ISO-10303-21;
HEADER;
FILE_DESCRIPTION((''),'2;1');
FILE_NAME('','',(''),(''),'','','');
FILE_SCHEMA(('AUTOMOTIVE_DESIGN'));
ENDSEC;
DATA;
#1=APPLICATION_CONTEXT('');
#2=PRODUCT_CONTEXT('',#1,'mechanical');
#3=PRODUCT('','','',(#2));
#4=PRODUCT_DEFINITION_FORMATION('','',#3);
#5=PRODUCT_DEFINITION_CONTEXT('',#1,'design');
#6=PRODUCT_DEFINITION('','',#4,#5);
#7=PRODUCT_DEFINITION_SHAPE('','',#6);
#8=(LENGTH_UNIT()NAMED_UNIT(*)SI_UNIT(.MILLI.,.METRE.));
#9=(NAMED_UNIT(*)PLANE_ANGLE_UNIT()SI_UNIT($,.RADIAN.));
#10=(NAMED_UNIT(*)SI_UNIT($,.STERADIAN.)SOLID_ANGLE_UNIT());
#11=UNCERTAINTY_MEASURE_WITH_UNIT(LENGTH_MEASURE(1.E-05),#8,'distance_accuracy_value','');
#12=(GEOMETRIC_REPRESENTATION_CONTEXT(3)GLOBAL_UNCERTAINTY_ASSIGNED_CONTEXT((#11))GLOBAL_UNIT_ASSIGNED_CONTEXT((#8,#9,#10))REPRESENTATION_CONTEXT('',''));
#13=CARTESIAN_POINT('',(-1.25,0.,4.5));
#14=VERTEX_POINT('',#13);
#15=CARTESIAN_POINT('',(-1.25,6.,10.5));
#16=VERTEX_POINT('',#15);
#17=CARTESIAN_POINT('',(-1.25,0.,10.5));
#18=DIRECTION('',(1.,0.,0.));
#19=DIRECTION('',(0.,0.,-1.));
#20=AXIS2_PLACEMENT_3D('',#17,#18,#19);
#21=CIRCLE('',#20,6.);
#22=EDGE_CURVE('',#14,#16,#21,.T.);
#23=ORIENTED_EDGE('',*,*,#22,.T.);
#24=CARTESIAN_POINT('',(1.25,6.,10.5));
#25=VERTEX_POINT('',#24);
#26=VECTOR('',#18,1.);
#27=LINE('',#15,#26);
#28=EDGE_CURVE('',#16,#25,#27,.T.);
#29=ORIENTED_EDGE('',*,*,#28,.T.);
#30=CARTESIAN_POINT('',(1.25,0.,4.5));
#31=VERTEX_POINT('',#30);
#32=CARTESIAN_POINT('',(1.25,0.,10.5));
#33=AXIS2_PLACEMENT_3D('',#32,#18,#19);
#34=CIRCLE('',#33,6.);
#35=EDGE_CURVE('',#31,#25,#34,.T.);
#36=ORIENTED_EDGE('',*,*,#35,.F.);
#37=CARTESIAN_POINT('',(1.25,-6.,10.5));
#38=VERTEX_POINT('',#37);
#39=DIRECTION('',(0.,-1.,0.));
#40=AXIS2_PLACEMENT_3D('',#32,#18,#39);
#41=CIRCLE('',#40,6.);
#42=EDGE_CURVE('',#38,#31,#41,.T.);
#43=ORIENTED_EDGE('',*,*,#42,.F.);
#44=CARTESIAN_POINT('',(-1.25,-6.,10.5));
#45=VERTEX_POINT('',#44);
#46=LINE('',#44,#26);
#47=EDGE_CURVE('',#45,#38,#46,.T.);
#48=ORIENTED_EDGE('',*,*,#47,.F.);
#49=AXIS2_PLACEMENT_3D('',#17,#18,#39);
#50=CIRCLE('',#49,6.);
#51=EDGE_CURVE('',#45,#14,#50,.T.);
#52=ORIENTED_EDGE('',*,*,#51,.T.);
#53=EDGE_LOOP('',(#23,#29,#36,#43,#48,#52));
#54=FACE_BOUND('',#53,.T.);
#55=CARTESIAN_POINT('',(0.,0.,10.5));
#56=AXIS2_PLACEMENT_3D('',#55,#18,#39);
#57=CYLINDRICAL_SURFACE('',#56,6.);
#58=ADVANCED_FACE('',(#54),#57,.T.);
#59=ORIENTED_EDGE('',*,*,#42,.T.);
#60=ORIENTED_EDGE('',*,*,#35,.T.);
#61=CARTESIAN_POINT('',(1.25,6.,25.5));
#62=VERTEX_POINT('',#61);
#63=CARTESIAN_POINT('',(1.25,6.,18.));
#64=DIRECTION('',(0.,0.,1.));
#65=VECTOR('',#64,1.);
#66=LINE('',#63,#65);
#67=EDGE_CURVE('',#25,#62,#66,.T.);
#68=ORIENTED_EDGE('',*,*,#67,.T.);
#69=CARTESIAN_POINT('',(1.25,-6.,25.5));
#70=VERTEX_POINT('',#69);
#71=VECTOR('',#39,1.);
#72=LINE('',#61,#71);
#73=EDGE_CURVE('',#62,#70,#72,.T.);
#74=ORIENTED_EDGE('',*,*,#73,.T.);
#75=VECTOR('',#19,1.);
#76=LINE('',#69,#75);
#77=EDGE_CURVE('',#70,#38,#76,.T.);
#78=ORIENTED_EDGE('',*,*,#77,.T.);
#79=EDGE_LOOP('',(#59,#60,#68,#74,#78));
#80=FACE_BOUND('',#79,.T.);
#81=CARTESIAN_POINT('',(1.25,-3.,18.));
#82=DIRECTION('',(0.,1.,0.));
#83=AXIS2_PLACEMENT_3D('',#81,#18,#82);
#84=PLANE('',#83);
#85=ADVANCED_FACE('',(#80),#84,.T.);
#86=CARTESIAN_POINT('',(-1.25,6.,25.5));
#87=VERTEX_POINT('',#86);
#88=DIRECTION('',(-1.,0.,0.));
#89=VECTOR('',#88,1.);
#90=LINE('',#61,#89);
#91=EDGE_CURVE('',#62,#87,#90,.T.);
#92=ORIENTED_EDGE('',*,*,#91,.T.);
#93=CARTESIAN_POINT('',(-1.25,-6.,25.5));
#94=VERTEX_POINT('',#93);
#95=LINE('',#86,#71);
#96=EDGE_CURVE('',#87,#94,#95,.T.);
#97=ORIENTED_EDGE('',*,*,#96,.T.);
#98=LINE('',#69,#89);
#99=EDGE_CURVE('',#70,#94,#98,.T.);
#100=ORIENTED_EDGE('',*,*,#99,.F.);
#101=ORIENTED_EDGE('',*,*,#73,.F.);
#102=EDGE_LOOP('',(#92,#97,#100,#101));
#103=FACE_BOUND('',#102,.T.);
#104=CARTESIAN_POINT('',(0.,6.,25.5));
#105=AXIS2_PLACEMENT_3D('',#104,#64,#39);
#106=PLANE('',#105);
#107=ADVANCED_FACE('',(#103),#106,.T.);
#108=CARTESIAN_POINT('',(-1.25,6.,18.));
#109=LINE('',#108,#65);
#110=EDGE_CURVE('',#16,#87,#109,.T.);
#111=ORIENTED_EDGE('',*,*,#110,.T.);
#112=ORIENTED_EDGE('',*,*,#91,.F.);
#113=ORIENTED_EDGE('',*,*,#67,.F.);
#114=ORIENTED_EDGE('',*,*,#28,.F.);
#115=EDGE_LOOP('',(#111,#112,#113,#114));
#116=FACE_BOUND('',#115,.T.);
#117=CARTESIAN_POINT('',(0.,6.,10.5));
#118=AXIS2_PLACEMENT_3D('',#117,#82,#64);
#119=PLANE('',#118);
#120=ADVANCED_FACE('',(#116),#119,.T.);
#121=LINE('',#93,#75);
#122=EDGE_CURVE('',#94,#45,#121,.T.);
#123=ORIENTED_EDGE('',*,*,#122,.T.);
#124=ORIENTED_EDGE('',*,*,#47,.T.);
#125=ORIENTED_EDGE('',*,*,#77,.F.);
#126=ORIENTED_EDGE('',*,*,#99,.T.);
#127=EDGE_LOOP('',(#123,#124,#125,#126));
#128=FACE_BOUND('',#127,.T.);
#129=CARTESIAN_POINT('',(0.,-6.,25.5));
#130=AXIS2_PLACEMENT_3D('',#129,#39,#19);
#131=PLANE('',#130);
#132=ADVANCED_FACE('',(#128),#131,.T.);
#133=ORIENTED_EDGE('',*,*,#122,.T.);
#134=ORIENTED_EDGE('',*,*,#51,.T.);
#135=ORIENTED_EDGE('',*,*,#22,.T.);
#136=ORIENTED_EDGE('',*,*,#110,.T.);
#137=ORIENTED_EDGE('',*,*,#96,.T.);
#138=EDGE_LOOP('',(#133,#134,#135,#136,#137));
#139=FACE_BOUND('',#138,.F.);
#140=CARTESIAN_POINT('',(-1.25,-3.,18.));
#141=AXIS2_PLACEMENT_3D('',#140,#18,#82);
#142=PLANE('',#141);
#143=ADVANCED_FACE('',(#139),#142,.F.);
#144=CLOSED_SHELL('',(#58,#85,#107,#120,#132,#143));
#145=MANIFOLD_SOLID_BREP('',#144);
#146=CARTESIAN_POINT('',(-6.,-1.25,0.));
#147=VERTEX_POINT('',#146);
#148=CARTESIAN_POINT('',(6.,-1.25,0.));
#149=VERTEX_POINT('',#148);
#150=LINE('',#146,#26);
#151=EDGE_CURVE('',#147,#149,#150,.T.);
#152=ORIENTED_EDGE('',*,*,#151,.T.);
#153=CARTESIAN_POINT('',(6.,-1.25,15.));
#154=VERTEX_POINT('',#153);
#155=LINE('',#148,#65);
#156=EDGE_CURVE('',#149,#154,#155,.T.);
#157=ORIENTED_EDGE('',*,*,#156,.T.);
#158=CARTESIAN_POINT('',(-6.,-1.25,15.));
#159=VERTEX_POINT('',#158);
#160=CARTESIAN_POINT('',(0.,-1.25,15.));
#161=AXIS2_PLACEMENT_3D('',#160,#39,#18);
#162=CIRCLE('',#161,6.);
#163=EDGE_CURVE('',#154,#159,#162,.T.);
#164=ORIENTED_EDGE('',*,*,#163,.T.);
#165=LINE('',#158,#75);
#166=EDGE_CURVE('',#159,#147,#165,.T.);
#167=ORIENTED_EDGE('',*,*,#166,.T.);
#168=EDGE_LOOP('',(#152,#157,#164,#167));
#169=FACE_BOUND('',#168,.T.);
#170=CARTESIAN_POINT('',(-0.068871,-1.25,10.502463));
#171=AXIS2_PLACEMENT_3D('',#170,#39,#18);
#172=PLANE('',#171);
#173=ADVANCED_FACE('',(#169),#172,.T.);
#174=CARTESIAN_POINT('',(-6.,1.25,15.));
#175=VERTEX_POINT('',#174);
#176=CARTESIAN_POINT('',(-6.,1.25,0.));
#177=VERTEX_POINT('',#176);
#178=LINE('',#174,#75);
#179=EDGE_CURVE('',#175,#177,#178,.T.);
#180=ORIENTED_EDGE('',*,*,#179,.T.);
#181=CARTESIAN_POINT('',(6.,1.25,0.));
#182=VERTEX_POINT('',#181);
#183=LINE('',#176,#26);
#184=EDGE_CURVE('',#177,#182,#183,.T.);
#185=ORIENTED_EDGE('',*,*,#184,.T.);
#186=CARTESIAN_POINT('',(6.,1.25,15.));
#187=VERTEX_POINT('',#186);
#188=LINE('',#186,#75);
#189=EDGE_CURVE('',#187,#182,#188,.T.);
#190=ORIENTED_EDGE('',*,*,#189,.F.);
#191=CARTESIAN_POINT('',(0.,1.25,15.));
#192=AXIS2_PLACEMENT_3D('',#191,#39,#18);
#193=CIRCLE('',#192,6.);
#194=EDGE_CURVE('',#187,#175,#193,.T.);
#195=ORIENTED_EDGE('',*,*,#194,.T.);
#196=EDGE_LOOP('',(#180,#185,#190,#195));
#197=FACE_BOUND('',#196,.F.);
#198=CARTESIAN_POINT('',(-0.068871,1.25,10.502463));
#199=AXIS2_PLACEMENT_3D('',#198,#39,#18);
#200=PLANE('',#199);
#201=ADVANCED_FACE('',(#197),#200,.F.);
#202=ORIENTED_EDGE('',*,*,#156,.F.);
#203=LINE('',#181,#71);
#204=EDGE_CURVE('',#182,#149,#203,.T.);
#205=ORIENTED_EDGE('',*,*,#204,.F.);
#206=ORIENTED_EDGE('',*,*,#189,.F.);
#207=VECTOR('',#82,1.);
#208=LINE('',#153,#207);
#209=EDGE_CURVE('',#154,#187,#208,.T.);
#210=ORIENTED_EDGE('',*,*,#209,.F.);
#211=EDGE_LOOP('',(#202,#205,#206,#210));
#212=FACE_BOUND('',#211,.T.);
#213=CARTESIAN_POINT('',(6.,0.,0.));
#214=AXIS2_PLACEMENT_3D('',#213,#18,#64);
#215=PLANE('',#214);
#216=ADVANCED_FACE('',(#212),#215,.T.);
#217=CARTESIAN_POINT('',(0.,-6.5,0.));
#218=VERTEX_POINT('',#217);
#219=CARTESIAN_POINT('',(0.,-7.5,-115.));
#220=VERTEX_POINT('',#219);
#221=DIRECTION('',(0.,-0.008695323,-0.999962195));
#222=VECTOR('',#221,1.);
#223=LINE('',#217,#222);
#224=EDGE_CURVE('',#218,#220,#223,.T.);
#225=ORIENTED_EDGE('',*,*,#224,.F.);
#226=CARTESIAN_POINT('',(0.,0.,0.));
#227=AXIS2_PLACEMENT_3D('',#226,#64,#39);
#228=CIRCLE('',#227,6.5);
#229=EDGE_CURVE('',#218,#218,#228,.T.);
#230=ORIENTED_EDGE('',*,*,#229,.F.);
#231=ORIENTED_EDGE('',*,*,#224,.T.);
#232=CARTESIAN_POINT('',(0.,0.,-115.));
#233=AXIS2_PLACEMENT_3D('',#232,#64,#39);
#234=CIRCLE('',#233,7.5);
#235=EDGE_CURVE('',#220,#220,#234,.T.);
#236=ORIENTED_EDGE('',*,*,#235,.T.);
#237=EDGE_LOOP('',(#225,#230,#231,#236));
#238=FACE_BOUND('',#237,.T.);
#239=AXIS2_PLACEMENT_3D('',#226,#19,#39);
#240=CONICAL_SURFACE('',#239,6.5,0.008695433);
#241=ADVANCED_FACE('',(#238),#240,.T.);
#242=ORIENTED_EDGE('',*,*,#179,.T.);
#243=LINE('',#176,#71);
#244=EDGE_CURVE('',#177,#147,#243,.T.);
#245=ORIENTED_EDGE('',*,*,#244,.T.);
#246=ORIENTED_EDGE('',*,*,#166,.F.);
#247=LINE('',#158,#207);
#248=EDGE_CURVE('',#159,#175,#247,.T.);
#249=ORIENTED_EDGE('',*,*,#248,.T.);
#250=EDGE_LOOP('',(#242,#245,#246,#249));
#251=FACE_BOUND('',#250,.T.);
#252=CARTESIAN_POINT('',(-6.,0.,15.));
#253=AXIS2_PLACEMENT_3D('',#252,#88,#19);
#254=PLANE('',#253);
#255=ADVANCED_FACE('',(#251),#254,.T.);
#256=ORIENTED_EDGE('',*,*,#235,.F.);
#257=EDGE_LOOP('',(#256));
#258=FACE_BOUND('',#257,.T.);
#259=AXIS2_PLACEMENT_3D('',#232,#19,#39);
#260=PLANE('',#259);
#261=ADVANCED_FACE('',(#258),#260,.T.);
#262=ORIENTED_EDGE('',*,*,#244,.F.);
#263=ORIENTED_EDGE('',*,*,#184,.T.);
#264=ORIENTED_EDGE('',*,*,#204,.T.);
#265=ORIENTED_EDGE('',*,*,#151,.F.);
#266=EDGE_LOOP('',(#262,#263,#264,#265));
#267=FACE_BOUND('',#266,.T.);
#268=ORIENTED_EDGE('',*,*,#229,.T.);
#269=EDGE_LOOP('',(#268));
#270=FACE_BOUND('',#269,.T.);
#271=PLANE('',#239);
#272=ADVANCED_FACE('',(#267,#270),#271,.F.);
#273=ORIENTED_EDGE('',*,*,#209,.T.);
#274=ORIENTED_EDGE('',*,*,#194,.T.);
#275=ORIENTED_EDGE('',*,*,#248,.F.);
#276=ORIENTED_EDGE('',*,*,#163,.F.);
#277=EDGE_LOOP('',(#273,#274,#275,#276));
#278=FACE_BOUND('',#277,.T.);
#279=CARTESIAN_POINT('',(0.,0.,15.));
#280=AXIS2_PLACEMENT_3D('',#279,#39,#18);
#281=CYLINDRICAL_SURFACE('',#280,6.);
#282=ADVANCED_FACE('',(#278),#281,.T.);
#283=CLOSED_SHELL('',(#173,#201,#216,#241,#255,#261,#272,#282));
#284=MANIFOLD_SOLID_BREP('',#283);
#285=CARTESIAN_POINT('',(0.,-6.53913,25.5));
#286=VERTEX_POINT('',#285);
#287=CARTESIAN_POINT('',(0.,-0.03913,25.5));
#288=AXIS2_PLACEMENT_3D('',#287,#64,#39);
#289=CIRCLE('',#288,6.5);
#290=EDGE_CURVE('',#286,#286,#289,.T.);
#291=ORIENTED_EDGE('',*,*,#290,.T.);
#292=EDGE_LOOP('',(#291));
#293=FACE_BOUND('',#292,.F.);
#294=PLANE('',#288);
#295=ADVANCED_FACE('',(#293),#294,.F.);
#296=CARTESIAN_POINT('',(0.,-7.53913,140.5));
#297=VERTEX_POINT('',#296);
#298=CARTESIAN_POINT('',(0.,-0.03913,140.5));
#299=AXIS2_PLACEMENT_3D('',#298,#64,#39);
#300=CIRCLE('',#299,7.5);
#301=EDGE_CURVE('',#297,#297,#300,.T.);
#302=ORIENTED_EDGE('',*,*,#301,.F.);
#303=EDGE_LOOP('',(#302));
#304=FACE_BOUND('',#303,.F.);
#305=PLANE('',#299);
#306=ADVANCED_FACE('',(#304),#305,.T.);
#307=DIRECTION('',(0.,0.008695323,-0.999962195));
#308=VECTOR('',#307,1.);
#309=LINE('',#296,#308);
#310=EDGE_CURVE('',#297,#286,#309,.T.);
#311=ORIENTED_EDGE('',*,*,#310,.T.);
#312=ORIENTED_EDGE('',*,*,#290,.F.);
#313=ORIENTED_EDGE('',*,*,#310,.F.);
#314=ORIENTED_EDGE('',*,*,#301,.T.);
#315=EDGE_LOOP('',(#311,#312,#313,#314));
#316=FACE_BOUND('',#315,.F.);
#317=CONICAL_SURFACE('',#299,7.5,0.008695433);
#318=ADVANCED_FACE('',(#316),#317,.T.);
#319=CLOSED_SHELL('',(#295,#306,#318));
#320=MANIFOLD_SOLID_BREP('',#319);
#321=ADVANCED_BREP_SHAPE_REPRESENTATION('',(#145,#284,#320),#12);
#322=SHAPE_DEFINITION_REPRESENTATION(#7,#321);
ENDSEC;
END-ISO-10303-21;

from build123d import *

# Parameters (mm, degrees)
F0_R     = 2
F1_DEPTH = 1.25
F4_W     = 6
F4_H     = 15
F6_DEPTH = 1.25
F7_W     = 6
F7_H     = 15
F9_DEPTH = 1.25


# Not quite as in the source:
# - a feature names something its author has since deleted; it is built from what else it names


with BuildPart() as f1:
    # F0 (on Front) → F1 (new body, symmetric)
    with BuildSketch(Plane.XZ):
        with BuildLine():
            Line((-6, 15), (-6, 0))
            Line((-6, 0), (6, 0))
            Line((6, 0), (6, 6))
            ThreePointArc((6, 6), (4.2426406871, 10.2426406871), (0, 12))
            ThreePointArc((0, 12), (-2.1213203436, 17.1213203436), (3, 15))
            ThreePointArc((3, 15), (4.5, 13.5), (6, 15))
            ThreePointArc((6, 15), (0, 21), (-6, 15))
        make_face()
        with Locations((0, 6)):
            Circle(F0_R, mode=Mode.SUBTRACT)
    extrude(amount=F1_DEPTH, both=True)

    # F2 (on Right) → F3 (revolve)
    with BuildSketch(Plane.YZ):
        Polygon((0, -115), (0, 0), (-6.5, 0), (-7.5, -115), align=None)
    revolve(axis=Axis((0, 0, -57.5), (0, 0, -1)))



with BuildPart() as f5:
    # F4 (on Front) → F5 (revolve)
    with BuildSketch(Plane.XZ):
        Polygon((0, -115), (0, 0), (-6, 0), (-6.5, 0), (-7.5, -115), align=None)
    revolve(axis=Axis((0, 0, -57.5), (0, 0, 1)))


with BuildPart() as f1_1:
    add(f1.part)

    add(f5.part)  # F6 merges F5
    # F4 (on Front) → F6 (join, symmetric)
    with BuildSketch(Plane.XZ):
        with Locations((-3, 7.5)):
            Rectangle(F4_W, F4_H)
        with Locations((3, 7.5)):
            Rectangle(F4_W, F4_H)
        with BuildLine():
            Line((-6, 15), (0, 15))
            Line((0, 15), (6, 15))
            ThreePointArc((6, 15), (0, 21), (-6, 15))
        make_face()
    extrude(amount=F6_DEPTH, both=True)


with BuildPart() as f8:
    # F7 (on Right) → F8 (revolve)
    with BuildSketch(Plane.YZ):
        Polygon((-6, 25.5), (-0.0391304348, 25.5), (-0.0391304348, 140.5), (-7.5391304348, 140.5), (-6.5391304348, 25.5), align=None)
    revolve(axis=Axis((0, -0.0391304348, 83), (0, 0, 1)))


with BuildPart() as f9:
    # F7 (on Right) → F9 (new body, symmetric)
    with BuildSketch(Plane.YZ):
        Polygon((0, 10.5), (0, 25.5), (-0.0391304348, 25.5), (-6, 25.5), (-6, 10.5), align=None)
        with Locations((3, 18)):
            Rectangle(F7_W, F7_H)
        with BuildLine():
            Line((6, 10.5), (0, 10.5))
            Line((0, 10.5), (-6, 10.5))
            ThreePointArc((-6, 10.5), (-4.2426406871, 6.2573593129), (0, 4.5))
            ThreePointArc((0, 4.5), (4.2426406871, 6.2573593129), (6, 10.5))
        make_face()
    extrude(amount=F9_DEPTH, both=True)


solid = Compound([f1_1.part, f8.part, f9.part])
